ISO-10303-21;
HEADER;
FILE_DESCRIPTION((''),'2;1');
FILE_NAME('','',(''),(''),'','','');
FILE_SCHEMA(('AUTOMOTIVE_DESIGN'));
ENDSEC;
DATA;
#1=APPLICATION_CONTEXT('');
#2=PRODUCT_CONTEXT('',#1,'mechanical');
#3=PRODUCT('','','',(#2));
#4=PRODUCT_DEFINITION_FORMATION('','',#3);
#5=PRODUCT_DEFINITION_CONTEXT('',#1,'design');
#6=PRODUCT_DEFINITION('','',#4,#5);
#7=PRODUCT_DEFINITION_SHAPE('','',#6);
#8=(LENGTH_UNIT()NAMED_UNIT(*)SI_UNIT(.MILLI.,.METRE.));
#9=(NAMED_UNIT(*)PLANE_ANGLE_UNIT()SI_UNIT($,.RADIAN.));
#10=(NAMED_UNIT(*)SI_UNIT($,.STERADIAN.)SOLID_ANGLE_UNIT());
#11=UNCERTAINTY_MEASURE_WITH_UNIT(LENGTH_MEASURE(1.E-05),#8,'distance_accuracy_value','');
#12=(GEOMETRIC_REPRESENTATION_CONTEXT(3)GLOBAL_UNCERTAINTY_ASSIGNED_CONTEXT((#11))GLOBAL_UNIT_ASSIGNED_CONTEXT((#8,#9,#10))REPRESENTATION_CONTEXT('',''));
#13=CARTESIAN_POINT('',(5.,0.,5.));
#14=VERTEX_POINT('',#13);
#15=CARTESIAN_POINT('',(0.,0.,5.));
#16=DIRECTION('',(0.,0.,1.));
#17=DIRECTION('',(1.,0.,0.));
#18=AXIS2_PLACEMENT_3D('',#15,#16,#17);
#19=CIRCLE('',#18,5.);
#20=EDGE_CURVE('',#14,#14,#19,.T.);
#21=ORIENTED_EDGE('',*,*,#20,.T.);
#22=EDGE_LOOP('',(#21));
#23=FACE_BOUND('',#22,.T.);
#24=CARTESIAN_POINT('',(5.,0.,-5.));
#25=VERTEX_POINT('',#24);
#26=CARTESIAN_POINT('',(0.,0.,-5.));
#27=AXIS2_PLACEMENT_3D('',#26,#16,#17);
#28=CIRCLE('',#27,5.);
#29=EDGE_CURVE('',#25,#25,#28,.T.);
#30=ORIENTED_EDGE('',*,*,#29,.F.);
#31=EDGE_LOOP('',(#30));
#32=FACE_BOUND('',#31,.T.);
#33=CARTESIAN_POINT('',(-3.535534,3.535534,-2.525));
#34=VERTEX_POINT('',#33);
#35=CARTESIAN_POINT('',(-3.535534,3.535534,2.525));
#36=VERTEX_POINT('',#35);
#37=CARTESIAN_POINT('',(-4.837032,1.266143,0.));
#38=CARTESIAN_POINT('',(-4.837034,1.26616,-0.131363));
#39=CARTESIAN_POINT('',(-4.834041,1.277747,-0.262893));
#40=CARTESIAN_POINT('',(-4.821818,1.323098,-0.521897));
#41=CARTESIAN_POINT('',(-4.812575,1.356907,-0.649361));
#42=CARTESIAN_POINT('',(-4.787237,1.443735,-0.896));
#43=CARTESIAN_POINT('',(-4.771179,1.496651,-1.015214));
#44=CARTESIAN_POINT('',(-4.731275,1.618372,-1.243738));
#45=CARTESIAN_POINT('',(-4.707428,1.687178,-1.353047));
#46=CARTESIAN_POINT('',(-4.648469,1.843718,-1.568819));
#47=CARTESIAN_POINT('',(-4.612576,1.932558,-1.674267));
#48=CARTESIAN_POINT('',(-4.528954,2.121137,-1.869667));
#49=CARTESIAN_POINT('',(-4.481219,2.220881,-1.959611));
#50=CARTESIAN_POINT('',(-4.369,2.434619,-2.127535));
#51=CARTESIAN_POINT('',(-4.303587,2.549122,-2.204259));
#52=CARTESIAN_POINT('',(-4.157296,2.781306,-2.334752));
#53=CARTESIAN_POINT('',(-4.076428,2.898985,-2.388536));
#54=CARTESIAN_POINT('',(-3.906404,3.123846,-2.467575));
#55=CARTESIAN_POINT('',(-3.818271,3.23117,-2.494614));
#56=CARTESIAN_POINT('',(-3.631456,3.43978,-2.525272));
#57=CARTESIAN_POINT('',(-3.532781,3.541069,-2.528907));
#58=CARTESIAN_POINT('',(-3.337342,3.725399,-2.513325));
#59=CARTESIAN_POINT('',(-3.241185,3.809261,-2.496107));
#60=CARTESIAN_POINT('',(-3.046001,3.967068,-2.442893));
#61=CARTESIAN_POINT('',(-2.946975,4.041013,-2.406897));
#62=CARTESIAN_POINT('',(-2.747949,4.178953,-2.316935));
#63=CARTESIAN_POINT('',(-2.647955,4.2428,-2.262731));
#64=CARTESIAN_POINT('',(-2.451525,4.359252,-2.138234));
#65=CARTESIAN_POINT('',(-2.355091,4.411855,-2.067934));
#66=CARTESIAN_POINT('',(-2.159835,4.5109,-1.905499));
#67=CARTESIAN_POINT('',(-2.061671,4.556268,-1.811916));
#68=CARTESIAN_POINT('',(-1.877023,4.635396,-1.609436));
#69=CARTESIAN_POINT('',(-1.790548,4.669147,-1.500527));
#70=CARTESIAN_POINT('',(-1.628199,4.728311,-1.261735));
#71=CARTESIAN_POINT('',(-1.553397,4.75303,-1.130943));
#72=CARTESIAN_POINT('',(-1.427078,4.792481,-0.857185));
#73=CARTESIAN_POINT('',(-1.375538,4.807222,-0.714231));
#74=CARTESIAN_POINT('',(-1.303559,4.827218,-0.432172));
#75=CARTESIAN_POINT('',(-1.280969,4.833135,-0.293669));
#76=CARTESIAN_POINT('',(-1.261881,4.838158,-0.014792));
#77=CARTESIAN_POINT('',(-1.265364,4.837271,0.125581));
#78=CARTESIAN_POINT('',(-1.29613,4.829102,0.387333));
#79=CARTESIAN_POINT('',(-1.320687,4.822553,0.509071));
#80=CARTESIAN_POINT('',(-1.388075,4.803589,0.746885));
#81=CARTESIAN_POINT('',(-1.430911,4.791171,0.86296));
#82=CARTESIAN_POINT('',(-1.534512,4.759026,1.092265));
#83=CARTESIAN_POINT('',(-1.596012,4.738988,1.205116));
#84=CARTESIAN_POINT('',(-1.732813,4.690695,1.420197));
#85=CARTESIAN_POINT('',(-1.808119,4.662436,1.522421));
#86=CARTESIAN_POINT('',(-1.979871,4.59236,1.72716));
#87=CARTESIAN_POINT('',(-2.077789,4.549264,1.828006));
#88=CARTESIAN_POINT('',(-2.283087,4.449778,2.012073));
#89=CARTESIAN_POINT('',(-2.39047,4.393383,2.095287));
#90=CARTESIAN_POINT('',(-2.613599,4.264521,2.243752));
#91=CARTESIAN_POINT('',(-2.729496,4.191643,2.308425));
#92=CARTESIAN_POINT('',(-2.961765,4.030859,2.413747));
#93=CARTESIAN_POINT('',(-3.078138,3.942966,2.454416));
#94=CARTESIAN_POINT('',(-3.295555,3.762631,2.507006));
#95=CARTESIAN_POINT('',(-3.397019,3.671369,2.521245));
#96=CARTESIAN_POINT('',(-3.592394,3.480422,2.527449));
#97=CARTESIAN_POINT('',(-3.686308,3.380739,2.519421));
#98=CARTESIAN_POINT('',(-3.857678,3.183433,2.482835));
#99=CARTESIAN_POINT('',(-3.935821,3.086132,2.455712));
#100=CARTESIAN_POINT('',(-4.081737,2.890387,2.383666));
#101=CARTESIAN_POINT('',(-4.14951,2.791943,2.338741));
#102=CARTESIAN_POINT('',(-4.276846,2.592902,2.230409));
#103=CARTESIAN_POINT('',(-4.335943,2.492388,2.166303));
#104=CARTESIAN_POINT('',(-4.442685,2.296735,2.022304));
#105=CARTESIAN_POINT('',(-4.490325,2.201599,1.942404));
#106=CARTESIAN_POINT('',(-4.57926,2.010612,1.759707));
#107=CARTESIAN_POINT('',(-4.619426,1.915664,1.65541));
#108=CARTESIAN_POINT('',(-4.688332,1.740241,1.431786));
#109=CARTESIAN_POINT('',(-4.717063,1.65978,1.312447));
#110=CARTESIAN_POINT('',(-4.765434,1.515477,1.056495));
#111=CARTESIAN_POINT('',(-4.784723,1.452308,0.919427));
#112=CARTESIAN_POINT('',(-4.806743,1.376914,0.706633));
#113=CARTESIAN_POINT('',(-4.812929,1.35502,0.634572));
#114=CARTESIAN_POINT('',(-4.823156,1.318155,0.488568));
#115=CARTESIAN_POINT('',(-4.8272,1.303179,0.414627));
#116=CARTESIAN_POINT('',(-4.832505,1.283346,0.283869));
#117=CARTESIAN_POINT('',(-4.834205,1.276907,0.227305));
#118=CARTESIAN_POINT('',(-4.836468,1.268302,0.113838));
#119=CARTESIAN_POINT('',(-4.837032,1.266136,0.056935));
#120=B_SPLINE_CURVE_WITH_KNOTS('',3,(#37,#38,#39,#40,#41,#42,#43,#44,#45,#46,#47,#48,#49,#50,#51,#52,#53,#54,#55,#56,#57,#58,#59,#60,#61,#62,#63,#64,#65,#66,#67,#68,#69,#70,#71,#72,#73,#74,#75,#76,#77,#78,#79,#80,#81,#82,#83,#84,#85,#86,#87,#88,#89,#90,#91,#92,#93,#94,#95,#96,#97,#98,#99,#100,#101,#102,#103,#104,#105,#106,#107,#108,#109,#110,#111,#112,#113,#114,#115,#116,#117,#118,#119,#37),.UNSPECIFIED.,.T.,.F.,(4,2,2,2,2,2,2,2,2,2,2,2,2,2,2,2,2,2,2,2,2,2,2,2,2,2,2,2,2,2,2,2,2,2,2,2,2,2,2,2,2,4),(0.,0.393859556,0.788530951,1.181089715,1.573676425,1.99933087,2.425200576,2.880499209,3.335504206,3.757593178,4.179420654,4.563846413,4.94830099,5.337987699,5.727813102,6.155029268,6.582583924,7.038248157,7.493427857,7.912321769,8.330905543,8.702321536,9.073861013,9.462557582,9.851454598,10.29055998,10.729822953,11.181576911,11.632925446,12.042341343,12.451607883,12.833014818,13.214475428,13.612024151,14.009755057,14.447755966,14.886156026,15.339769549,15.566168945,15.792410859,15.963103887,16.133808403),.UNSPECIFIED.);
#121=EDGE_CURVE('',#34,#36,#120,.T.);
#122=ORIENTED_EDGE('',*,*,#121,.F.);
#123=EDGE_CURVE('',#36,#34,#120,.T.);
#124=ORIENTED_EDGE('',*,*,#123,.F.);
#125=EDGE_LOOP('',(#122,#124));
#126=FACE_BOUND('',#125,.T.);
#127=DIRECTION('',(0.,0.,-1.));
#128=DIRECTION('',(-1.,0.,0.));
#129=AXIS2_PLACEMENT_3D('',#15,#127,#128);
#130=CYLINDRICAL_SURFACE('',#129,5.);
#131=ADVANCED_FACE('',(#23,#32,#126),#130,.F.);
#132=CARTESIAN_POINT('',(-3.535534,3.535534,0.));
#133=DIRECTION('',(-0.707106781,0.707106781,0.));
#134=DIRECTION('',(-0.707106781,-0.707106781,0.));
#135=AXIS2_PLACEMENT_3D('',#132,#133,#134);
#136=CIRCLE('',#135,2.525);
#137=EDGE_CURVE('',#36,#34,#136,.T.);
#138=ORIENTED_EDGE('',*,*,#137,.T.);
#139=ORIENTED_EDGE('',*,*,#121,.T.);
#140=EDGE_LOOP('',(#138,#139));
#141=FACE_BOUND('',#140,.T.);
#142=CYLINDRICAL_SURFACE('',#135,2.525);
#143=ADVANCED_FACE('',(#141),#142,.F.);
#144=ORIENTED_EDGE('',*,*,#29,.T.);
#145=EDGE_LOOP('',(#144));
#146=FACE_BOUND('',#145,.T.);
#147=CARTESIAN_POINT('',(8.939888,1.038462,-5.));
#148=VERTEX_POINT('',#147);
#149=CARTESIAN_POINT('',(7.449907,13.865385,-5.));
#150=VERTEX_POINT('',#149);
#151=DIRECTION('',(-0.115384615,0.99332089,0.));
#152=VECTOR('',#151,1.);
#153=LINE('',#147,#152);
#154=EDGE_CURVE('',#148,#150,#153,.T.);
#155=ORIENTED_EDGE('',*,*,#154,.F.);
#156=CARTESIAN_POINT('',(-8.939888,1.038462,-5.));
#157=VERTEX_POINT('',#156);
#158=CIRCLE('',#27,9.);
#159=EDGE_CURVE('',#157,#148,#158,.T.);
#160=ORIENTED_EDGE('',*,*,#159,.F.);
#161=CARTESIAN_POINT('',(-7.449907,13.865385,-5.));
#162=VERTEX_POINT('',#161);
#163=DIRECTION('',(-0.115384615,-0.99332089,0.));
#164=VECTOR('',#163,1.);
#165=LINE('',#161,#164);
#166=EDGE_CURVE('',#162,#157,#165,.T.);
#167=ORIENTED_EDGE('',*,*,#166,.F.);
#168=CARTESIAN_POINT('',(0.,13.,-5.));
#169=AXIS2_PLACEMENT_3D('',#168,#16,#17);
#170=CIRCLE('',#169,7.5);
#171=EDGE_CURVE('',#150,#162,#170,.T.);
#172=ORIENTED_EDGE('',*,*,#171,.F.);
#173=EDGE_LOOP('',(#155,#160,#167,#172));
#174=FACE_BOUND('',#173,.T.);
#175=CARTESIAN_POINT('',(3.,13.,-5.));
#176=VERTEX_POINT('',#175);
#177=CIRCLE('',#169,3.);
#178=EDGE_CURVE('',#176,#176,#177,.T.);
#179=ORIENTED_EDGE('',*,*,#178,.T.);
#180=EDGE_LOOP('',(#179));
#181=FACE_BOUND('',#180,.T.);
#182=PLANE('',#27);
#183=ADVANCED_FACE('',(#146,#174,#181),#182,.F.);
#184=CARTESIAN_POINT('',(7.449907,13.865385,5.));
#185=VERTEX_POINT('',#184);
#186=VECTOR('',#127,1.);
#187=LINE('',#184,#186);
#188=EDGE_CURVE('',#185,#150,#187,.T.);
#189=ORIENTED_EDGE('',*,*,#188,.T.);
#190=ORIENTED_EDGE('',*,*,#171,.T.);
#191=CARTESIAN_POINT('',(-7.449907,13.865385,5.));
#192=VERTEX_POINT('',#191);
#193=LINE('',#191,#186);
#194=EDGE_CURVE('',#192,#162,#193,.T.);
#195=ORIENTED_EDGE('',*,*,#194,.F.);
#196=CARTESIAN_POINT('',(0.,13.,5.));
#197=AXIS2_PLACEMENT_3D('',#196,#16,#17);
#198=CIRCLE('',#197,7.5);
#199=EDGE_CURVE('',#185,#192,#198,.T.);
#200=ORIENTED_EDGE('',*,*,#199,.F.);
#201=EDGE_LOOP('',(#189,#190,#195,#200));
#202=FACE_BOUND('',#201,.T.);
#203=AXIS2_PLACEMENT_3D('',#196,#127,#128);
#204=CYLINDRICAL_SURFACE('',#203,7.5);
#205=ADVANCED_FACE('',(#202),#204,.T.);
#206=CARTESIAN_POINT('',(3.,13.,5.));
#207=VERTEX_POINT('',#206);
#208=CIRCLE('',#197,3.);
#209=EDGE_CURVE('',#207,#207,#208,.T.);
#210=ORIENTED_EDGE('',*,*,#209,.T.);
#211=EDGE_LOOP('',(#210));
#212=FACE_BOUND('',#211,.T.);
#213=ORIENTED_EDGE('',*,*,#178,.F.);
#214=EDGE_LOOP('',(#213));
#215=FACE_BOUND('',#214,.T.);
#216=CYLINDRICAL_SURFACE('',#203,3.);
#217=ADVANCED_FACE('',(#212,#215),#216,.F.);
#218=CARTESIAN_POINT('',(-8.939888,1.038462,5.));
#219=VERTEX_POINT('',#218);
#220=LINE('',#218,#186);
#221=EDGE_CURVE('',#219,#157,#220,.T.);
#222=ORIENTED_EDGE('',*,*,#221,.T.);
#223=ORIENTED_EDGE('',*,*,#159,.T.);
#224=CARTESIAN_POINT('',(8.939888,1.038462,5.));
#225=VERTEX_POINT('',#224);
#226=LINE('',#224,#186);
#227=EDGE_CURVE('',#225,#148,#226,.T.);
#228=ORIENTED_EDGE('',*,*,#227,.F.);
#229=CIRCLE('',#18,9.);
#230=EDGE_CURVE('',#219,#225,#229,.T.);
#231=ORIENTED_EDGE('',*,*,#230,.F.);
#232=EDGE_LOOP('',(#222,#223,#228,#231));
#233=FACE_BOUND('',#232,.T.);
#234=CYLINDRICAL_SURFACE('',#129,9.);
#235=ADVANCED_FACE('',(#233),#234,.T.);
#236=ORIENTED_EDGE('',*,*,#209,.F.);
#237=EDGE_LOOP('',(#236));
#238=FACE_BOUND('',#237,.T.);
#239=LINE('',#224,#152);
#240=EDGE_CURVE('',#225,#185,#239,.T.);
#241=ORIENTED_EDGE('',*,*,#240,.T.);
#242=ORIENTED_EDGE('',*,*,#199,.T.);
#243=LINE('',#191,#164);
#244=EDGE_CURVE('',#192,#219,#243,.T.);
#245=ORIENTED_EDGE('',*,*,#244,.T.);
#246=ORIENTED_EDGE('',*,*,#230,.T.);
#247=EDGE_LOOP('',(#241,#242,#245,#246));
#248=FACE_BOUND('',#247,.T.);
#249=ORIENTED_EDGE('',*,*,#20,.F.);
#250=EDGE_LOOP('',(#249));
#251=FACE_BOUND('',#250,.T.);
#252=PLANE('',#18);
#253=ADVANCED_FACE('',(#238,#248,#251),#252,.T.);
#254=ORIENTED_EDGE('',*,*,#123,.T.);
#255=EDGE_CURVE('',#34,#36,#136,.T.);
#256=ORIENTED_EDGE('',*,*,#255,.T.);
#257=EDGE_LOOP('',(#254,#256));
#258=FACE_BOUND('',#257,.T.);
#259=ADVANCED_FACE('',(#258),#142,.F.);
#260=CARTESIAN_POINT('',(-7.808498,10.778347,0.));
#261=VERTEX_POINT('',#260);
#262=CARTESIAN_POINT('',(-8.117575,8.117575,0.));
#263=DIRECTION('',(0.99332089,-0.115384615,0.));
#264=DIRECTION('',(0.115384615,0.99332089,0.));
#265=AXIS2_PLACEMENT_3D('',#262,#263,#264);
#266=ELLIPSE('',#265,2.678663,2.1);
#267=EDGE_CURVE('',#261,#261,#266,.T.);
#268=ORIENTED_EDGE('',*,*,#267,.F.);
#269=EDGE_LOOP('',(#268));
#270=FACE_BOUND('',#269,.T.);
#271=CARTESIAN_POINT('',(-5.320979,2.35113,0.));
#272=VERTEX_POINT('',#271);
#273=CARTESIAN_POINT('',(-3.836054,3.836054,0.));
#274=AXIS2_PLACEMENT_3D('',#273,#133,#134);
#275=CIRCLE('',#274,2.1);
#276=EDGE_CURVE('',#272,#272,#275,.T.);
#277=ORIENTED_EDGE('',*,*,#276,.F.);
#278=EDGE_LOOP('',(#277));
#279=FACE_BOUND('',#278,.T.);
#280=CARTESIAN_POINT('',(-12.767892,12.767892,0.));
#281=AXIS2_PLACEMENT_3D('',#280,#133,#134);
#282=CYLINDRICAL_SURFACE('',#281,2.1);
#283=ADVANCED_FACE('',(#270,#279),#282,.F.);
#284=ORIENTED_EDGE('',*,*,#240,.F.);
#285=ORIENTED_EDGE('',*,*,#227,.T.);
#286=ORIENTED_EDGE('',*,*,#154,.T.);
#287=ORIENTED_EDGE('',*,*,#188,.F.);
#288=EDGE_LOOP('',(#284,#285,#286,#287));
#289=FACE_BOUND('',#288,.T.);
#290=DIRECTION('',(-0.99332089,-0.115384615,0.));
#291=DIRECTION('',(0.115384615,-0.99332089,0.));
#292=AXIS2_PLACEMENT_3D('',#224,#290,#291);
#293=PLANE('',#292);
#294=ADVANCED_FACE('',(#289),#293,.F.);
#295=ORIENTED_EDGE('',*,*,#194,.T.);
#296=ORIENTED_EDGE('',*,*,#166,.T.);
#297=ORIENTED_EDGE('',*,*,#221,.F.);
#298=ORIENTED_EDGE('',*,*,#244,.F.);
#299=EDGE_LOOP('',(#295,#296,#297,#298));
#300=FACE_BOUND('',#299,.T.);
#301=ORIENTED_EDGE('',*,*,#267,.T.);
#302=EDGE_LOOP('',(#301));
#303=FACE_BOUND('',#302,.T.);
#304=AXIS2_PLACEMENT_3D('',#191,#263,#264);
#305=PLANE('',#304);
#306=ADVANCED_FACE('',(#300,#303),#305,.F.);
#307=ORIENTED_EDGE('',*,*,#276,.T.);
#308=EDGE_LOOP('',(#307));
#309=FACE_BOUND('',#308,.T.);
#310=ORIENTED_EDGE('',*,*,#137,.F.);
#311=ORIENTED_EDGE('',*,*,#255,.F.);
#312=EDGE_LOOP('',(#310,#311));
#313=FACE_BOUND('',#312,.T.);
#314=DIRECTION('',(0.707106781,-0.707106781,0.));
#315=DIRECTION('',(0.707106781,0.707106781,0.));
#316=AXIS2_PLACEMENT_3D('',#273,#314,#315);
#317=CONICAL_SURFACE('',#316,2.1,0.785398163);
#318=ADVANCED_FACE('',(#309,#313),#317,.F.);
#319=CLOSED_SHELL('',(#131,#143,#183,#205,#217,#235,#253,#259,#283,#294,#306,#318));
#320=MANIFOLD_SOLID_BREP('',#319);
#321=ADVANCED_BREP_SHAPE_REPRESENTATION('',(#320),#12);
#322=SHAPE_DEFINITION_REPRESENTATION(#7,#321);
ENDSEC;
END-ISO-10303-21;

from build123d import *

# Parameters (mm, degrees)
SKETCH_1_R      = 3
SKETCH_1_R_2    = 5
EXTRUDE_1_DEPTH = 5


# Read off the part's stored shape, not the designer's step: M5 螺纹孔1
with BuildPart() as part:
    # 草图1 → 凸台-拉伸1 (new, symmetric)
    with BuildSketch(Plane.XY):
        with BuildLine():
            Line((8.93988801, 1.038461538), (7.449906675, 13.865384615))
            ThreePointArc((7.449906675, 13.865384615), (0, 20.5), (-7.449906675, 13.865384615))
            Line((-7.449906675, 13.865384615), (-8.93988801, 1.038461538))
            ThreePointArc((-8.93988801, 1.038461538), (0, -9), (8.93988801, 1.038461538))
        make_face()
        with Locations((0, 13)):
            Circle(SKETCH_1_R, mode=Mode.SUBTRACT)
        Circle(SKETCH_1_R_2, mode=Mode.SUBTRACT)
    extrude(amount=EXTRUDE_1_DEPTH, both=True)

    # M5 螺纹孔1 outline → M5 螺纹孔1 (revolve, cut)
    with BuildSketch(Plane(origin=(0, 0, 0), x_dir=(0.707106781186549, 0.707106781186546, 0), z_dir=(0, 0, -1))):
        Polygon((2.1, -4.315295433), (2.1, -5.425), (2.525, -5), (2.525, -4.315295433), align=None)
        Polygon((2.1, -13.143744736), (2.1, -5.425), (2.1, -4.315295433), (0, -4.315295433), (0, -13.143744736), align=None)
    revolve(axis=Axis((0, 0, 0), (0.707106781186546, -0.707106781186549, 0)), mode=Mode.SUBTRACT)


solid = part.part
